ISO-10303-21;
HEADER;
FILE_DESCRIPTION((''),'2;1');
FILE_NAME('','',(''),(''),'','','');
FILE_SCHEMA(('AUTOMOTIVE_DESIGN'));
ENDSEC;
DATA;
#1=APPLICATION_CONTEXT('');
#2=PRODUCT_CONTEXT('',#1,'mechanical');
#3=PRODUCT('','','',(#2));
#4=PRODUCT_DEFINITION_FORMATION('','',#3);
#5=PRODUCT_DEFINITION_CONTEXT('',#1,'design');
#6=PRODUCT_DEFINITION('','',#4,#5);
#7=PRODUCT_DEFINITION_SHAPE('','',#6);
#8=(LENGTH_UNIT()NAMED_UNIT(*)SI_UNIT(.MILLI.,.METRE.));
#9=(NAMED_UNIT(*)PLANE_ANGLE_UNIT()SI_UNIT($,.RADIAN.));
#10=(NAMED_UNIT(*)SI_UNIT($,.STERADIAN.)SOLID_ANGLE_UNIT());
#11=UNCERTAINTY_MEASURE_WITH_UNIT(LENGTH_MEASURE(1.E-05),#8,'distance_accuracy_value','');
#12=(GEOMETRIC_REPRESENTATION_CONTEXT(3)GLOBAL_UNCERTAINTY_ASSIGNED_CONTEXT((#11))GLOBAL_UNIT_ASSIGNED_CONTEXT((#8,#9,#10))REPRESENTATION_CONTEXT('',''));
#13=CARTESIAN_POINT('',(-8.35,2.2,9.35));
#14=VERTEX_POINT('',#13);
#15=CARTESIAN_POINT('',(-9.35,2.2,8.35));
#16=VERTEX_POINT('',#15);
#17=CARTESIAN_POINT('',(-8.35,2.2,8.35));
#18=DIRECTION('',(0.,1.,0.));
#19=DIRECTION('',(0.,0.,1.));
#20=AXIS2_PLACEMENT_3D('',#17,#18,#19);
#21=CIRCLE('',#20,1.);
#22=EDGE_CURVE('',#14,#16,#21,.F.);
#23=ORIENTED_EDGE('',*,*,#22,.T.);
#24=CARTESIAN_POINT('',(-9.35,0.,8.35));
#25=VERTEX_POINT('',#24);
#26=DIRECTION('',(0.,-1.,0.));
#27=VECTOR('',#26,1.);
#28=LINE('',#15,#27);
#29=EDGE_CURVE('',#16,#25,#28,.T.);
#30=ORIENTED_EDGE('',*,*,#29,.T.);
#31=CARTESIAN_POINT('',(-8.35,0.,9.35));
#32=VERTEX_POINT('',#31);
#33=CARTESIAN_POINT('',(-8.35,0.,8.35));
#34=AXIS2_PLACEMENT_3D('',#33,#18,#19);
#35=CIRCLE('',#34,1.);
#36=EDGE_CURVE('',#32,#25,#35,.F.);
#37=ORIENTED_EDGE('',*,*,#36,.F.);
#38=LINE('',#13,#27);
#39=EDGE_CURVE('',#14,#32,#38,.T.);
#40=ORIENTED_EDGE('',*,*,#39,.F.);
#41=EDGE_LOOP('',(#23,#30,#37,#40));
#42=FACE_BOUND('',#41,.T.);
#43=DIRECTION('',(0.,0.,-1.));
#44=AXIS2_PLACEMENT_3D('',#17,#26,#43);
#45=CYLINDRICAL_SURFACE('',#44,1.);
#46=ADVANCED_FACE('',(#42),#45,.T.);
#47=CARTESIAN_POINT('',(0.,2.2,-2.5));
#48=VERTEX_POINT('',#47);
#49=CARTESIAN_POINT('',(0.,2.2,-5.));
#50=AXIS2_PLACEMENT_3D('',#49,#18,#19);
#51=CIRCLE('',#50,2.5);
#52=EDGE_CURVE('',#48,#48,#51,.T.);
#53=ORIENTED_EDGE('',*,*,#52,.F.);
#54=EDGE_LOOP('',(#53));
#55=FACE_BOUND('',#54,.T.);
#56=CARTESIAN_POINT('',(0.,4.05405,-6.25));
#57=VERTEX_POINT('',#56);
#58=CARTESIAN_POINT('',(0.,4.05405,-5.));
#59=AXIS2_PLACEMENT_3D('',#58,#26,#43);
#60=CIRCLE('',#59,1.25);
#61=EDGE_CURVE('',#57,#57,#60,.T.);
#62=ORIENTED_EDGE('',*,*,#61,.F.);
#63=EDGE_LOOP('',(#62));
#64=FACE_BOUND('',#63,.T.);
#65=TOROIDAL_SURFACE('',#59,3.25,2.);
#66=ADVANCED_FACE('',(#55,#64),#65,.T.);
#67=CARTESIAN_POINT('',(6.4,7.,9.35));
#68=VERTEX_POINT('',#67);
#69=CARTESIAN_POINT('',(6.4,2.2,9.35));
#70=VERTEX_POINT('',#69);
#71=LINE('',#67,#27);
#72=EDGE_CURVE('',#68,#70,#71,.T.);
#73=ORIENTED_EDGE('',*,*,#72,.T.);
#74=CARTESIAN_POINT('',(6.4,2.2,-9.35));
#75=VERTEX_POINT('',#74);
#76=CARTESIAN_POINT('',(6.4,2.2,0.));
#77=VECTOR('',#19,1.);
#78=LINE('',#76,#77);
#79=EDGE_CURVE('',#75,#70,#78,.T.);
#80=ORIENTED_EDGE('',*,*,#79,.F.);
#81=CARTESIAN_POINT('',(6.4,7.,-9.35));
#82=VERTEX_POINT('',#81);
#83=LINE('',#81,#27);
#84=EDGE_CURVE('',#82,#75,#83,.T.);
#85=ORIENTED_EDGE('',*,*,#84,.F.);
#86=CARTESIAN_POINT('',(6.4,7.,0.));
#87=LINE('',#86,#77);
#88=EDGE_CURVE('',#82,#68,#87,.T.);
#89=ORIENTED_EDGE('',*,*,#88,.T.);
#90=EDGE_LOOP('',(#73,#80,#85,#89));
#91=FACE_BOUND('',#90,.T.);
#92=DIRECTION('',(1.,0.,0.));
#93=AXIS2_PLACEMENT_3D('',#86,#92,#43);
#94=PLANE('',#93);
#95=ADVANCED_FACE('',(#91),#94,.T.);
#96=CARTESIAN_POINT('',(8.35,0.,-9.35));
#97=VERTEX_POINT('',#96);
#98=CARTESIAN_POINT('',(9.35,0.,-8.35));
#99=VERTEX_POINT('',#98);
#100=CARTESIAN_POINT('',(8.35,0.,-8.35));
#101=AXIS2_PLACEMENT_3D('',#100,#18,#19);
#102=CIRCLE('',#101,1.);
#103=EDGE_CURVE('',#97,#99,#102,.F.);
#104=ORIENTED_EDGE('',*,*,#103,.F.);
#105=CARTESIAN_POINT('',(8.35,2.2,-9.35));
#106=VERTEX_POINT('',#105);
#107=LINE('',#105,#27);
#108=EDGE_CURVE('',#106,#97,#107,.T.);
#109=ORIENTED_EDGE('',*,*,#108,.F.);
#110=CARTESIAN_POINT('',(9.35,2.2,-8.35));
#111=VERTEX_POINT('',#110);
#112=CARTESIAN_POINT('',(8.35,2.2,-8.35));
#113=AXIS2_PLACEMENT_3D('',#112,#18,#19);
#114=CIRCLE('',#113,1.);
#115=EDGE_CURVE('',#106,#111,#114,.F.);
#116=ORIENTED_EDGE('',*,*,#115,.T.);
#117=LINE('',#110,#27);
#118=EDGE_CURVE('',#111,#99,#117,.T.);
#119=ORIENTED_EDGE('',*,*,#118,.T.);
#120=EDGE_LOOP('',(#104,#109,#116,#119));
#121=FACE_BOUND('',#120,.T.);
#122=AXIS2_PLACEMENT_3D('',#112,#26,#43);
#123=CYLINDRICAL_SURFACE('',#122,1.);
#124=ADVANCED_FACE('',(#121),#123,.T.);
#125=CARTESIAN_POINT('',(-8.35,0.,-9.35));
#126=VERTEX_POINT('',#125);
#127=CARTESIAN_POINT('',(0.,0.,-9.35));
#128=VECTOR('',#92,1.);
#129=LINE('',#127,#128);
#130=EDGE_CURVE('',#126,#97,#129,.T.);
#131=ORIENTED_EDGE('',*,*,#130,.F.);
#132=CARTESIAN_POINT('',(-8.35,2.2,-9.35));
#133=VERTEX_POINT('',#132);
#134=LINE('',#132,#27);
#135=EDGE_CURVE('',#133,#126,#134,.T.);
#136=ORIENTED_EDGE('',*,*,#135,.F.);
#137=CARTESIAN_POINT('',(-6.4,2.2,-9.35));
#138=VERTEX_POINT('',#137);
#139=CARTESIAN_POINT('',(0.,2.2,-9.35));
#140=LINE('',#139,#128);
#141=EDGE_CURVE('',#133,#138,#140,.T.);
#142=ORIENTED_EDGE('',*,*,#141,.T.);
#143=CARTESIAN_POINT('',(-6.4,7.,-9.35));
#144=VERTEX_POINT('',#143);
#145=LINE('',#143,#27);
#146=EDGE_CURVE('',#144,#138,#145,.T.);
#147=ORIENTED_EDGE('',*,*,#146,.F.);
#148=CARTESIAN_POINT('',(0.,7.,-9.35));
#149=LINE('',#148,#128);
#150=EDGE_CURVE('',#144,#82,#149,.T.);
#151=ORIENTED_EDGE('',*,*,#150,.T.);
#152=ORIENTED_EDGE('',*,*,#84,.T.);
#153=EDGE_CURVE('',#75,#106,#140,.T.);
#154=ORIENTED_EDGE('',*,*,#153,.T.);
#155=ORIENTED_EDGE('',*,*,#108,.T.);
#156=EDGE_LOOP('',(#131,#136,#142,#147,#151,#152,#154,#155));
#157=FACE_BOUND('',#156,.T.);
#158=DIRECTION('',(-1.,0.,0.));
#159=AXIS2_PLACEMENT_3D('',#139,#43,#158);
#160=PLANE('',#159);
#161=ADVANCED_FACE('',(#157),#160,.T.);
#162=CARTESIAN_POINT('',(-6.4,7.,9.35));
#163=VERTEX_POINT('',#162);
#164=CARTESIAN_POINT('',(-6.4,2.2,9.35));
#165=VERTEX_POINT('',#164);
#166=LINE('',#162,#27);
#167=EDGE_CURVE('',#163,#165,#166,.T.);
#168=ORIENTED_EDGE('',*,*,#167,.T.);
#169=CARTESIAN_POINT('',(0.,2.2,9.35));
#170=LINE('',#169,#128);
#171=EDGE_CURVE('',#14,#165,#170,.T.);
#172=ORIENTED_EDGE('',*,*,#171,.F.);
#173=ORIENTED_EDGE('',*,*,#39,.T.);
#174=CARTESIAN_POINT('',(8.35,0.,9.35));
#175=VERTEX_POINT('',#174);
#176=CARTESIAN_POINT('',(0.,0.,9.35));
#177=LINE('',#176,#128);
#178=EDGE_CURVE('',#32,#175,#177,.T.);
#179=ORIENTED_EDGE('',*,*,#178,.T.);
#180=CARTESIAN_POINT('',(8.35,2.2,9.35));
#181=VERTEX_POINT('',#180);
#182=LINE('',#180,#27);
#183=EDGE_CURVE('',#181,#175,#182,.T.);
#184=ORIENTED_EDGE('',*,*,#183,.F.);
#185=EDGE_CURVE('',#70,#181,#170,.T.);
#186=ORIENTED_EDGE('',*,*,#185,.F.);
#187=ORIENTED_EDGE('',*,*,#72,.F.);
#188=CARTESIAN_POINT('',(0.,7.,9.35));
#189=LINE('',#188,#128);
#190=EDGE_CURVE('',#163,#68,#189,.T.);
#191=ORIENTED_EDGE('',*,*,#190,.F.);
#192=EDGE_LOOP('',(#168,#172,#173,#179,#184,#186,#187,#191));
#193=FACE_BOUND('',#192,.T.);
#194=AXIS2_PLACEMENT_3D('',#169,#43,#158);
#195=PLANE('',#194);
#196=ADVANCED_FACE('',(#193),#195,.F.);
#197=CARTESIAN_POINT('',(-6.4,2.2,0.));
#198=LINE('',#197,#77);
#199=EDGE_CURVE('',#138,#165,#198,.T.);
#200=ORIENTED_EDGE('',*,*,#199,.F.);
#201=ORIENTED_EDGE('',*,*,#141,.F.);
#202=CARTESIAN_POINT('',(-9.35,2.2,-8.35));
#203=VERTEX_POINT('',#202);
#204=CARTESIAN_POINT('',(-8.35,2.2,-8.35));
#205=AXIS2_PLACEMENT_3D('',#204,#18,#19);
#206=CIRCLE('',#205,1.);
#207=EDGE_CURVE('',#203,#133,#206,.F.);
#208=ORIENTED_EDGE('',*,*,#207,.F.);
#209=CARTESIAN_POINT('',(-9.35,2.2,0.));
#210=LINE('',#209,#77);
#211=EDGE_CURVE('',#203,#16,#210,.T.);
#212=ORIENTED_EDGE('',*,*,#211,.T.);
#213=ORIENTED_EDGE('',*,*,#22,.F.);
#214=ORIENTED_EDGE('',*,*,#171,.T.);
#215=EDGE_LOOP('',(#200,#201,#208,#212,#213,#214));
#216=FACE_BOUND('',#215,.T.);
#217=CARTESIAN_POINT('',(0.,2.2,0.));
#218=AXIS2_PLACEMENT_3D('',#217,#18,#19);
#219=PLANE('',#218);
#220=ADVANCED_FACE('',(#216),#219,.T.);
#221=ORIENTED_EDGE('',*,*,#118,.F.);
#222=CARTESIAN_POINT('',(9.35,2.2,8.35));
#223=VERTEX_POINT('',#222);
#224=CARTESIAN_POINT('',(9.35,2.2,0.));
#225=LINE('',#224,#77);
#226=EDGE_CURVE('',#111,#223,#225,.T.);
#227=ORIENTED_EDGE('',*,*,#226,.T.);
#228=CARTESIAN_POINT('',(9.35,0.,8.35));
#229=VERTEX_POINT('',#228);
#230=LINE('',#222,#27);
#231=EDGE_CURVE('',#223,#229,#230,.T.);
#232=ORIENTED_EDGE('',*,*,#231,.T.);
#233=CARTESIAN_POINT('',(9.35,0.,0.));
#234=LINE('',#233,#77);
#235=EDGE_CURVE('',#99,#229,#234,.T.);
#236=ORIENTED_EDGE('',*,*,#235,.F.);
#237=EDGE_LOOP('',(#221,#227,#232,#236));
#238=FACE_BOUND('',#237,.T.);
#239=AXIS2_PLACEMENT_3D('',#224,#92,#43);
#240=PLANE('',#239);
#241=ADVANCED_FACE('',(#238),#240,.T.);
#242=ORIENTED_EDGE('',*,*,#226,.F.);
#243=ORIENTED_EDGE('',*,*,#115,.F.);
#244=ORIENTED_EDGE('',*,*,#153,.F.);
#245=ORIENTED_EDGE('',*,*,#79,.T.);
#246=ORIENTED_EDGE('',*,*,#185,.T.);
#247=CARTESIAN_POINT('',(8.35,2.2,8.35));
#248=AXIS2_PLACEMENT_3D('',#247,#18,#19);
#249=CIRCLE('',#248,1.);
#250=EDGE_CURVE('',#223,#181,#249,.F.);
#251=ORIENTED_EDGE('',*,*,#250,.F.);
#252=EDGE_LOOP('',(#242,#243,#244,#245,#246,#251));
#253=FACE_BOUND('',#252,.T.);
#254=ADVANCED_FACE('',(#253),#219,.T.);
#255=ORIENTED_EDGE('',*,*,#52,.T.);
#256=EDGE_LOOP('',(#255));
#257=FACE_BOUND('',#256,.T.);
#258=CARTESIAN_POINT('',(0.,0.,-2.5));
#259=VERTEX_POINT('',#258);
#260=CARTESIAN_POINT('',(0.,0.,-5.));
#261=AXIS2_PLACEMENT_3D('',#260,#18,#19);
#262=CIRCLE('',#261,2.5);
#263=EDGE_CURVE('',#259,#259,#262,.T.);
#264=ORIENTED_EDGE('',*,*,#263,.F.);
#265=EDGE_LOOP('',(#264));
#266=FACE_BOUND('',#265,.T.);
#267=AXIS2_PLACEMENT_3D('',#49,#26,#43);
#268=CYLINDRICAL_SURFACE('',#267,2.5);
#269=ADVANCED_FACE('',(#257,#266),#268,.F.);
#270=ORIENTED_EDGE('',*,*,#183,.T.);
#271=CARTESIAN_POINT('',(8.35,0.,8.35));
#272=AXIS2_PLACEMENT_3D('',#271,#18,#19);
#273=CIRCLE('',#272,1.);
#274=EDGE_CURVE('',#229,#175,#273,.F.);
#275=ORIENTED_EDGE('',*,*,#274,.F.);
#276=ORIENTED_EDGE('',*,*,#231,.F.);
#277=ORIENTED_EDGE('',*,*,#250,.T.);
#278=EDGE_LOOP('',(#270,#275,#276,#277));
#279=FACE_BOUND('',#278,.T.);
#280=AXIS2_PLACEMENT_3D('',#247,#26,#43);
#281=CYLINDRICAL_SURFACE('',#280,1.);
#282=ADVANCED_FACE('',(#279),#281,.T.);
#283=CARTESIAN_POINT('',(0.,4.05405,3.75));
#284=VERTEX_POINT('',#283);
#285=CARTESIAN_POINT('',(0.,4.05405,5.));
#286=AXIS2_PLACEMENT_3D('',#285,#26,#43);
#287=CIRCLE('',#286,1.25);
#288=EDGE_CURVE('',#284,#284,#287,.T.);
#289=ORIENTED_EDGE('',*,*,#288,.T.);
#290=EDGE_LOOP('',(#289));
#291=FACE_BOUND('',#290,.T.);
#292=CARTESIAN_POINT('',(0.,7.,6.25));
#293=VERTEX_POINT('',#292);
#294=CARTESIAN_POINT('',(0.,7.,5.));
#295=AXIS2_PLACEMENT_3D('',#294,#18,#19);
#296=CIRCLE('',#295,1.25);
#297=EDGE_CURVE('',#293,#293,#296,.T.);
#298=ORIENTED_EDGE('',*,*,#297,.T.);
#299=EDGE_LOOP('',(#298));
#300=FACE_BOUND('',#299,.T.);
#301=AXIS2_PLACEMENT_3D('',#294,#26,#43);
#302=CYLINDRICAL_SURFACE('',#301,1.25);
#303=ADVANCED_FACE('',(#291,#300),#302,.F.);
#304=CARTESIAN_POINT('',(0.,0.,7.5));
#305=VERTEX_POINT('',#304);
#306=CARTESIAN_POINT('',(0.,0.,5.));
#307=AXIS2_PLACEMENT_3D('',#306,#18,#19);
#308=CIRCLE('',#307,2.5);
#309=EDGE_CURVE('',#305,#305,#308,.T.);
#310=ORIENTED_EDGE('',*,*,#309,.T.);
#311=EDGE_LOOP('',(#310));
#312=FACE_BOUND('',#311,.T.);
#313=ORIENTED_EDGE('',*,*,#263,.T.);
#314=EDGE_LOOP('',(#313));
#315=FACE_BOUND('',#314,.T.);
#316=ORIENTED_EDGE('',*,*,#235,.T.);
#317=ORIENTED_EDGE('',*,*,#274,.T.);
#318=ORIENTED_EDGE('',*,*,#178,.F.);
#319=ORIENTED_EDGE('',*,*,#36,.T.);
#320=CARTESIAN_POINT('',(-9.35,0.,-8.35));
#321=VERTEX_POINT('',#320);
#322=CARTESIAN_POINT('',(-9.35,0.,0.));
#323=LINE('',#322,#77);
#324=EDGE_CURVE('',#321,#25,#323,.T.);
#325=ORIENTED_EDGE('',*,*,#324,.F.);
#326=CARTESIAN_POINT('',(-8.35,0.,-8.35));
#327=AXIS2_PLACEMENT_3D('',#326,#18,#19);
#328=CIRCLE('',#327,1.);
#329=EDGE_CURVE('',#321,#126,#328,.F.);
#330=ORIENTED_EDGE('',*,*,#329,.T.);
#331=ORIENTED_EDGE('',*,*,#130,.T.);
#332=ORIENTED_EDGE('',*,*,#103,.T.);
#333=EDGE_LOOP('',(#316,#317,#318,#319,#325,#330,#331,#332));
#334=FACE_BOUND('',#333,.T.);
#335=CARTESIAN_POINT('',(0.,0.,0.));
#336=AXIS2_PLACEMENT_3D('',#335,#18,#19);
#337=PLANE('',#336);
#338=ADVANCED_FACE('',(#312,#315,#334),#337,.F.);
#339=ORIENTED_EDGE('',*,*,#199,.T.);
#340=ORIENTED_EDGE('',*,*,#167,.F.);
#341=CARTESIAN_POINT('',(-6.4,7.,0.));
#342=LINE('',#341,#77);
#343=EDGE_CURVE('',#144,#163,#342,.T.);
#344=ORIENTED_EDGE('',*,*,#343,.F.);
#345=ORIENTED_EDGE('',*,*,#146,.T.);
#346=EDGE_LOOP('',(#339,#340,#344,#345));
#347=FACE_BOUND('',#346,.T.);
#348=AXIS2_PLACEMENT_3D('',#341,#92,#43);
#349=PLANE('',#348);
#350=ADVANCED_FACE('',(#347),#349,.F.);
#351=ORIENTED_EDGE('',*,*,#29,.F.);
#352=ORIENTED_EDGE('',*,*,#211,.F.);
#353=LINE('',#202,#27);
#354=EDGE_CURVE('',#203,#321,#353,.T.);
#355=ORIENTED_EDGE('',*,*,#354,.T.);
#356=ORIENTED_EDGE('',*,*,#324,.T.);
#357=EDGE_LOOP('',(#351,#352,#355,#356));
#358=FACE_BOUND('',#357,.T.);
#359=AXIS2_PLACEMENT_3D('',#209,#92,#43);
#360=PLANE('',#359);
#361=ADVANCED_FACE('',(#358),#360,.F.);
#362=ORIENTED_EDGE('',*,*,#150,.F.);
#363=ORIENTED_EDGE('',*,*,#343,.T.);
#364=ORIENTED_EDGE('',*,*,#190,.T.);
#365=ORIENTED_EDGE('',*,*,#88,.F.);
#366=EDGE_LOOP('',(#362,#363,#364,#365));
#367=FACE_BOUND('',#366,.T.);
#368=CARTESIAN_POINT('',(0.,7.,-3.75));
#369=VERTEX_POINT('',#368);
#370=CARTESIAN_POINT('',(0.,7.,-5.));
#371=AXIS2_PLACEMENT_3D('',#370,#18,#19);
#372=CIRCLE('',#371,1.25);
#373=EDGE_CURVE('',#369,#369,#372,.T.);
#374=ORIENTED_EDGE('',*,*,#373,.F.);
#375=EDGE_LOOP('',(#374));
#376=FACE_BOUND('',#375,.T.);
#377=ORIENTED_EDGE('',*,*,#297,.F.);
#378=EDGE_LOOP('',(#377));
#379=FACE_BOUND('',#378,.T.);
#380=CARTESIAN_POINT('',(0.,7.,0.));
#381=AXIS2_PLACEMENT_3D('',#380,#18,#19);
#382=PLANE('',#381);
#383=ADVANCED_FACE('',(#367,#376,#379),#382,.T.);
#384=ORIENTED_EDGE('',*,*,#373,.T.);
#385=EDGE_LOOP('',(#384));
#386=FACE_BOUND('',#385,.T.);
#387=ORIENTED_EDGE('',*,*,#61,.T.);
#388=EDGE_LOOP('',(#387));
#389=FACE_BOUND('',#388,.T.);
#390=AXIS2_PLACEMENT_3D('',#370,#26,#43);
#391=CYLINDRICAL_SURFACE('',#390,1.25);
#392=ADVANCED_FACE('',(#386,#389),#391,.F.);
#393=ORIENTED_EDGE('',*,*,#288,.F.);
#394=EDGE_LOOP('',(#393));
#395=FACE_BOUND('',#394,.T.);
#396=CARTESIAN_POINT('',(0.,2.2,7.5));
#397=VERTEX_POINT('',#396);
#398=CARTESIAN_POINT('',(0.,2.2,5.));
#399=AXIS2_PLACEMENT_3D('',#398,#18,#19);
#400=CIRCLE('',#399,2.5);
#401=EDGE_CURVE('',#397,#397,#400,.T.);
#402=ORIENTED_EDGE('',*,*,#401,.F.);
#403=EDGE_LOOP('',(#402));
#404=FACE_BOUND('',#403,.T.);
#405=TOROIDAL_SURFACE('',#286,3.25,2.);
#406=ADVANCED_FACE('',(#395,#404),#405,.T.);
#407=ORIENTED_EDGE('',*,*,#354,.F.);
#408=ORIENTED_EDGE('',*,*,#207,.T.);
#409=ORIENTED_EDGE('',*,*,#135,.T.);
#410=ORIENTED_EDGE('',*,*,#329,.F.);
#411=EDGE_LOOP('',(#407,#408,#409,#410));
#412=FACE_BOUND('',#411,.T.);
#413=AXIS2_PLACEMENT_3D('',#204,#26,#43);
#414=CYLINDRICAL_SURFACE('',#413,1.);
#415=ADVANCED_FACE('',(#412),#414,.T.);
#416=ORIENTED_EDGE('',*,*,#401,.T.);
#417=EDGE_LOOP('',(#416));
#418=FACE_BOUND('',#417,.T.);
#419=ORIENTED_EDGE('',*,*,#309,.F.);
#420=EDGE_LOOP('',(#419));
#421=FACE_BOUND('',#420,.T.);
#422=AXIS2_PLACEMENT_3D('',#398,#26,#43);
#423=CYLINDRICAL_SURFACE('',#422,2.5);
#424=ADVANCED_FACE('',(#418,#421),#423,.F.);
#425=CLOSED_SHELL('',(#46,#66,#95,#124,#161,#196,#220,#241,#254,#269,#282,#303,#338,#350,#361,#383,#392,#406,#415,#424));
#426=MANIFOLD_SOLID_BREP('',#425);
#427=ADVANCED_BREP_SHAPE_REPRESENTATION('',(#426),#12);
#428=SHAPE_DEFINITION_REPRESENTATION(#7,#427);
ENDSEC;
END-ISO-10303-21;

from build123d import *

# Parameters (mm, degrees)
EXTRUDE_1_DEPTH     = 2.2
EXTRUDE_1_2_DEPTH   = 2.2
SKETCH_1_3_W        = 12.8
SKETCH_1_3_H        = 18.7
SKETCH_1_3_R        = 1.25
EXTRUDE_2_DEPTH     = 7
SKETCH_1_4_R        = 2.5
SKETCH_1_4_R_2      = 1.25
CUT_EXTRUDE_1_DEPTH = 2.2
FILLET_1_R          = 2


with BuildPart() as part:
    # 草图1 → 凸台-拉伸1 (new body)
    with BuildSketch(Plane(origin=(0, 0, 0), x_dir=(1, 0, 0), z_dir=(0, 1, 0))):
        with BuildLine():
            Line((-6.4, 9.35), (-8.35, 9.35))
            ThreePointArc((-8.35, 9.35), (-9.057106781, 9.057106781), (-9.35, 8.35))
            Line((-9.35, 8.35), (-9.35, -8.35))
            ThreePointArc((-9.35, -8.35), (-9.057106781, -9.057106781), (-8.35, -9.35))
            Line((-8.35, -9.35), (-6.4, -9.35))
            Line((-6.4, -9.35), (-6.4, 9.35))
        make_face()
    extrude(amount=EXTRUDE_1_DEPTH)



with BuildPart() as body_2:
    # 草图1 → Extrude 1 2 (new body)
    with BuildSketch(Plane(origin=(0, 0, 0), x_dir=(1, 0, 0), z_dir=(0, 1, 0))):
        with BuildLine():
            Line((8.35, 9.35), (6.4, 9.35))
            Line((6.4, 9.35), (6.4, -9.35))
            Line((6.4, -9.35), (8.35, -9.35))
            ThreePointArc((8.35, -9.35), (9.057106781, -9.057106781), (9.35, -8.35))
            Line((9.35, -8.35), (9.35, 8.35))
            ThreePointArc((9.35, 8.35), (9.057106781, 9.057106781), (8.35, 9.35))
        make_face()
    extrude(amount=EXTRUDE_1_2_DEPTH)


with BuildPart() as part_1:
    add(part.part)

    add(body_2.part)  # 凸台-拉伸2 merges body 2
    # 草图1<3> → 凸台-拉伸2 (add)
    with BuildSketch(Plane(origin=(0, 0, 0), x_dir=(1, 0, 0), z_dir=(0, 1, 0))):
        Rectangle(SKETCH_1_3_W, SKETCH_1_3_H)
        with Locations(Location((0, 5, 0), (0, 0, 270))):
            Circle(SKETCH_1_3_R, mode=Mode.SUBTRACT)
        with Locations(Location((0, -5, 0), (0, 0, 270))):
            Circle(SKETCH_1_3_R, mode=Mode.SUBTRACT)
    extrude(amount=EXTRUDE_2_DEPTH)

    # 草图1<4> → 切除-拉伸1 (cut)
    # profile 1 of 2: a face of its own
    with BuildSketch(Plane(origin=(0, 0, 0), x_dir=(1, 0, 0), z_dir=(0, 1, 0))):
        with Locations(Location((0, -5, 0), (0, 0, 270))):
            Circle(SKETCH_1_4_R)
        with Locations(Location((0, -5, 0), (0, 0, 270))):
            Circle(SKETCH_1_4_R_2, mode=Mode.SUBTRACT)
    # profile 2 of 2: a face of its own
    with BuildSketch(Plane(origin=(0, 0, 0), x_dir=(1, 0, 0), z_dir=(0, 1, 0))):
        with Locations(Location((0, 5, 0), (0, 0, 270))):
            Circle(SKETCH_1_4_R)
        with Locations(Location((0, 5, 0), (0, 0, 270))):
            Circle(SKETCH_1_4_R_2, mode=Mode.SUBTRACT)
    extrude(amount=CUT_EXTRUDE_1_DEPTH, mode=Mode.SUBTRACT)

    # 圆角1
    # the kernel refuses this fillet: 2 mm, written as the material it takes off along each edge
    with BuildSketch(Plane(origin=(0, 2.2, 5), x_dir=(0, 0, 1), z_dir=(-1, 0, 0))) as fillet_1_piece_1:
        with BuildLine():
            CenterArc((3.25, 1.854049622), FILLET_1_R, 180, 67.975687163)
            Line((2.5, 0), (2.485, -0.037080992))
            ThreePointArc((2.485, -0.037080992), (1.875, -0.04), (1.25, -0.04))
            Line((1.25, -0.04), (1.21, 0))
            Line((1.21, 0), (1.21, 1.854049622))
            Line((1.21, 1.854049622), (1.25, 1.854049622))
        make_face()
    revolve(axis=Axis((0, 2.2, 5), (0, 1, 0)), mode=Mode.SUBTRACT)
    with BuildSketch(Plane(origin=(0, 2.2, -5), x_dir=(0, 0, 1), z_dir=(-1, 0, 0))) as fillet_1_piece_2:
        with BuildLine():
            CenterArc((3.25, 1.854049622), FILLET_1_R, 180, 67.975687163)
            Line((2.5, 0), (2.485, -0.037080992))
            ThreePointArc((2.485, -0.037080992), (1.875, -0.04), (1.25, -0.04))
            Line((1.25, -0.04), (1.21, 0))
            Line((1.21, 0), (1.21, 1.854049622))
            Line((1.21, 1.854049622), (1.25, 1.854049622))
        make_face()
    revolve(axis=Axis((0, 2.2, -5), (0, 1, 0)), mode=Mode.SUBTRACT)


solid = part_1.part
